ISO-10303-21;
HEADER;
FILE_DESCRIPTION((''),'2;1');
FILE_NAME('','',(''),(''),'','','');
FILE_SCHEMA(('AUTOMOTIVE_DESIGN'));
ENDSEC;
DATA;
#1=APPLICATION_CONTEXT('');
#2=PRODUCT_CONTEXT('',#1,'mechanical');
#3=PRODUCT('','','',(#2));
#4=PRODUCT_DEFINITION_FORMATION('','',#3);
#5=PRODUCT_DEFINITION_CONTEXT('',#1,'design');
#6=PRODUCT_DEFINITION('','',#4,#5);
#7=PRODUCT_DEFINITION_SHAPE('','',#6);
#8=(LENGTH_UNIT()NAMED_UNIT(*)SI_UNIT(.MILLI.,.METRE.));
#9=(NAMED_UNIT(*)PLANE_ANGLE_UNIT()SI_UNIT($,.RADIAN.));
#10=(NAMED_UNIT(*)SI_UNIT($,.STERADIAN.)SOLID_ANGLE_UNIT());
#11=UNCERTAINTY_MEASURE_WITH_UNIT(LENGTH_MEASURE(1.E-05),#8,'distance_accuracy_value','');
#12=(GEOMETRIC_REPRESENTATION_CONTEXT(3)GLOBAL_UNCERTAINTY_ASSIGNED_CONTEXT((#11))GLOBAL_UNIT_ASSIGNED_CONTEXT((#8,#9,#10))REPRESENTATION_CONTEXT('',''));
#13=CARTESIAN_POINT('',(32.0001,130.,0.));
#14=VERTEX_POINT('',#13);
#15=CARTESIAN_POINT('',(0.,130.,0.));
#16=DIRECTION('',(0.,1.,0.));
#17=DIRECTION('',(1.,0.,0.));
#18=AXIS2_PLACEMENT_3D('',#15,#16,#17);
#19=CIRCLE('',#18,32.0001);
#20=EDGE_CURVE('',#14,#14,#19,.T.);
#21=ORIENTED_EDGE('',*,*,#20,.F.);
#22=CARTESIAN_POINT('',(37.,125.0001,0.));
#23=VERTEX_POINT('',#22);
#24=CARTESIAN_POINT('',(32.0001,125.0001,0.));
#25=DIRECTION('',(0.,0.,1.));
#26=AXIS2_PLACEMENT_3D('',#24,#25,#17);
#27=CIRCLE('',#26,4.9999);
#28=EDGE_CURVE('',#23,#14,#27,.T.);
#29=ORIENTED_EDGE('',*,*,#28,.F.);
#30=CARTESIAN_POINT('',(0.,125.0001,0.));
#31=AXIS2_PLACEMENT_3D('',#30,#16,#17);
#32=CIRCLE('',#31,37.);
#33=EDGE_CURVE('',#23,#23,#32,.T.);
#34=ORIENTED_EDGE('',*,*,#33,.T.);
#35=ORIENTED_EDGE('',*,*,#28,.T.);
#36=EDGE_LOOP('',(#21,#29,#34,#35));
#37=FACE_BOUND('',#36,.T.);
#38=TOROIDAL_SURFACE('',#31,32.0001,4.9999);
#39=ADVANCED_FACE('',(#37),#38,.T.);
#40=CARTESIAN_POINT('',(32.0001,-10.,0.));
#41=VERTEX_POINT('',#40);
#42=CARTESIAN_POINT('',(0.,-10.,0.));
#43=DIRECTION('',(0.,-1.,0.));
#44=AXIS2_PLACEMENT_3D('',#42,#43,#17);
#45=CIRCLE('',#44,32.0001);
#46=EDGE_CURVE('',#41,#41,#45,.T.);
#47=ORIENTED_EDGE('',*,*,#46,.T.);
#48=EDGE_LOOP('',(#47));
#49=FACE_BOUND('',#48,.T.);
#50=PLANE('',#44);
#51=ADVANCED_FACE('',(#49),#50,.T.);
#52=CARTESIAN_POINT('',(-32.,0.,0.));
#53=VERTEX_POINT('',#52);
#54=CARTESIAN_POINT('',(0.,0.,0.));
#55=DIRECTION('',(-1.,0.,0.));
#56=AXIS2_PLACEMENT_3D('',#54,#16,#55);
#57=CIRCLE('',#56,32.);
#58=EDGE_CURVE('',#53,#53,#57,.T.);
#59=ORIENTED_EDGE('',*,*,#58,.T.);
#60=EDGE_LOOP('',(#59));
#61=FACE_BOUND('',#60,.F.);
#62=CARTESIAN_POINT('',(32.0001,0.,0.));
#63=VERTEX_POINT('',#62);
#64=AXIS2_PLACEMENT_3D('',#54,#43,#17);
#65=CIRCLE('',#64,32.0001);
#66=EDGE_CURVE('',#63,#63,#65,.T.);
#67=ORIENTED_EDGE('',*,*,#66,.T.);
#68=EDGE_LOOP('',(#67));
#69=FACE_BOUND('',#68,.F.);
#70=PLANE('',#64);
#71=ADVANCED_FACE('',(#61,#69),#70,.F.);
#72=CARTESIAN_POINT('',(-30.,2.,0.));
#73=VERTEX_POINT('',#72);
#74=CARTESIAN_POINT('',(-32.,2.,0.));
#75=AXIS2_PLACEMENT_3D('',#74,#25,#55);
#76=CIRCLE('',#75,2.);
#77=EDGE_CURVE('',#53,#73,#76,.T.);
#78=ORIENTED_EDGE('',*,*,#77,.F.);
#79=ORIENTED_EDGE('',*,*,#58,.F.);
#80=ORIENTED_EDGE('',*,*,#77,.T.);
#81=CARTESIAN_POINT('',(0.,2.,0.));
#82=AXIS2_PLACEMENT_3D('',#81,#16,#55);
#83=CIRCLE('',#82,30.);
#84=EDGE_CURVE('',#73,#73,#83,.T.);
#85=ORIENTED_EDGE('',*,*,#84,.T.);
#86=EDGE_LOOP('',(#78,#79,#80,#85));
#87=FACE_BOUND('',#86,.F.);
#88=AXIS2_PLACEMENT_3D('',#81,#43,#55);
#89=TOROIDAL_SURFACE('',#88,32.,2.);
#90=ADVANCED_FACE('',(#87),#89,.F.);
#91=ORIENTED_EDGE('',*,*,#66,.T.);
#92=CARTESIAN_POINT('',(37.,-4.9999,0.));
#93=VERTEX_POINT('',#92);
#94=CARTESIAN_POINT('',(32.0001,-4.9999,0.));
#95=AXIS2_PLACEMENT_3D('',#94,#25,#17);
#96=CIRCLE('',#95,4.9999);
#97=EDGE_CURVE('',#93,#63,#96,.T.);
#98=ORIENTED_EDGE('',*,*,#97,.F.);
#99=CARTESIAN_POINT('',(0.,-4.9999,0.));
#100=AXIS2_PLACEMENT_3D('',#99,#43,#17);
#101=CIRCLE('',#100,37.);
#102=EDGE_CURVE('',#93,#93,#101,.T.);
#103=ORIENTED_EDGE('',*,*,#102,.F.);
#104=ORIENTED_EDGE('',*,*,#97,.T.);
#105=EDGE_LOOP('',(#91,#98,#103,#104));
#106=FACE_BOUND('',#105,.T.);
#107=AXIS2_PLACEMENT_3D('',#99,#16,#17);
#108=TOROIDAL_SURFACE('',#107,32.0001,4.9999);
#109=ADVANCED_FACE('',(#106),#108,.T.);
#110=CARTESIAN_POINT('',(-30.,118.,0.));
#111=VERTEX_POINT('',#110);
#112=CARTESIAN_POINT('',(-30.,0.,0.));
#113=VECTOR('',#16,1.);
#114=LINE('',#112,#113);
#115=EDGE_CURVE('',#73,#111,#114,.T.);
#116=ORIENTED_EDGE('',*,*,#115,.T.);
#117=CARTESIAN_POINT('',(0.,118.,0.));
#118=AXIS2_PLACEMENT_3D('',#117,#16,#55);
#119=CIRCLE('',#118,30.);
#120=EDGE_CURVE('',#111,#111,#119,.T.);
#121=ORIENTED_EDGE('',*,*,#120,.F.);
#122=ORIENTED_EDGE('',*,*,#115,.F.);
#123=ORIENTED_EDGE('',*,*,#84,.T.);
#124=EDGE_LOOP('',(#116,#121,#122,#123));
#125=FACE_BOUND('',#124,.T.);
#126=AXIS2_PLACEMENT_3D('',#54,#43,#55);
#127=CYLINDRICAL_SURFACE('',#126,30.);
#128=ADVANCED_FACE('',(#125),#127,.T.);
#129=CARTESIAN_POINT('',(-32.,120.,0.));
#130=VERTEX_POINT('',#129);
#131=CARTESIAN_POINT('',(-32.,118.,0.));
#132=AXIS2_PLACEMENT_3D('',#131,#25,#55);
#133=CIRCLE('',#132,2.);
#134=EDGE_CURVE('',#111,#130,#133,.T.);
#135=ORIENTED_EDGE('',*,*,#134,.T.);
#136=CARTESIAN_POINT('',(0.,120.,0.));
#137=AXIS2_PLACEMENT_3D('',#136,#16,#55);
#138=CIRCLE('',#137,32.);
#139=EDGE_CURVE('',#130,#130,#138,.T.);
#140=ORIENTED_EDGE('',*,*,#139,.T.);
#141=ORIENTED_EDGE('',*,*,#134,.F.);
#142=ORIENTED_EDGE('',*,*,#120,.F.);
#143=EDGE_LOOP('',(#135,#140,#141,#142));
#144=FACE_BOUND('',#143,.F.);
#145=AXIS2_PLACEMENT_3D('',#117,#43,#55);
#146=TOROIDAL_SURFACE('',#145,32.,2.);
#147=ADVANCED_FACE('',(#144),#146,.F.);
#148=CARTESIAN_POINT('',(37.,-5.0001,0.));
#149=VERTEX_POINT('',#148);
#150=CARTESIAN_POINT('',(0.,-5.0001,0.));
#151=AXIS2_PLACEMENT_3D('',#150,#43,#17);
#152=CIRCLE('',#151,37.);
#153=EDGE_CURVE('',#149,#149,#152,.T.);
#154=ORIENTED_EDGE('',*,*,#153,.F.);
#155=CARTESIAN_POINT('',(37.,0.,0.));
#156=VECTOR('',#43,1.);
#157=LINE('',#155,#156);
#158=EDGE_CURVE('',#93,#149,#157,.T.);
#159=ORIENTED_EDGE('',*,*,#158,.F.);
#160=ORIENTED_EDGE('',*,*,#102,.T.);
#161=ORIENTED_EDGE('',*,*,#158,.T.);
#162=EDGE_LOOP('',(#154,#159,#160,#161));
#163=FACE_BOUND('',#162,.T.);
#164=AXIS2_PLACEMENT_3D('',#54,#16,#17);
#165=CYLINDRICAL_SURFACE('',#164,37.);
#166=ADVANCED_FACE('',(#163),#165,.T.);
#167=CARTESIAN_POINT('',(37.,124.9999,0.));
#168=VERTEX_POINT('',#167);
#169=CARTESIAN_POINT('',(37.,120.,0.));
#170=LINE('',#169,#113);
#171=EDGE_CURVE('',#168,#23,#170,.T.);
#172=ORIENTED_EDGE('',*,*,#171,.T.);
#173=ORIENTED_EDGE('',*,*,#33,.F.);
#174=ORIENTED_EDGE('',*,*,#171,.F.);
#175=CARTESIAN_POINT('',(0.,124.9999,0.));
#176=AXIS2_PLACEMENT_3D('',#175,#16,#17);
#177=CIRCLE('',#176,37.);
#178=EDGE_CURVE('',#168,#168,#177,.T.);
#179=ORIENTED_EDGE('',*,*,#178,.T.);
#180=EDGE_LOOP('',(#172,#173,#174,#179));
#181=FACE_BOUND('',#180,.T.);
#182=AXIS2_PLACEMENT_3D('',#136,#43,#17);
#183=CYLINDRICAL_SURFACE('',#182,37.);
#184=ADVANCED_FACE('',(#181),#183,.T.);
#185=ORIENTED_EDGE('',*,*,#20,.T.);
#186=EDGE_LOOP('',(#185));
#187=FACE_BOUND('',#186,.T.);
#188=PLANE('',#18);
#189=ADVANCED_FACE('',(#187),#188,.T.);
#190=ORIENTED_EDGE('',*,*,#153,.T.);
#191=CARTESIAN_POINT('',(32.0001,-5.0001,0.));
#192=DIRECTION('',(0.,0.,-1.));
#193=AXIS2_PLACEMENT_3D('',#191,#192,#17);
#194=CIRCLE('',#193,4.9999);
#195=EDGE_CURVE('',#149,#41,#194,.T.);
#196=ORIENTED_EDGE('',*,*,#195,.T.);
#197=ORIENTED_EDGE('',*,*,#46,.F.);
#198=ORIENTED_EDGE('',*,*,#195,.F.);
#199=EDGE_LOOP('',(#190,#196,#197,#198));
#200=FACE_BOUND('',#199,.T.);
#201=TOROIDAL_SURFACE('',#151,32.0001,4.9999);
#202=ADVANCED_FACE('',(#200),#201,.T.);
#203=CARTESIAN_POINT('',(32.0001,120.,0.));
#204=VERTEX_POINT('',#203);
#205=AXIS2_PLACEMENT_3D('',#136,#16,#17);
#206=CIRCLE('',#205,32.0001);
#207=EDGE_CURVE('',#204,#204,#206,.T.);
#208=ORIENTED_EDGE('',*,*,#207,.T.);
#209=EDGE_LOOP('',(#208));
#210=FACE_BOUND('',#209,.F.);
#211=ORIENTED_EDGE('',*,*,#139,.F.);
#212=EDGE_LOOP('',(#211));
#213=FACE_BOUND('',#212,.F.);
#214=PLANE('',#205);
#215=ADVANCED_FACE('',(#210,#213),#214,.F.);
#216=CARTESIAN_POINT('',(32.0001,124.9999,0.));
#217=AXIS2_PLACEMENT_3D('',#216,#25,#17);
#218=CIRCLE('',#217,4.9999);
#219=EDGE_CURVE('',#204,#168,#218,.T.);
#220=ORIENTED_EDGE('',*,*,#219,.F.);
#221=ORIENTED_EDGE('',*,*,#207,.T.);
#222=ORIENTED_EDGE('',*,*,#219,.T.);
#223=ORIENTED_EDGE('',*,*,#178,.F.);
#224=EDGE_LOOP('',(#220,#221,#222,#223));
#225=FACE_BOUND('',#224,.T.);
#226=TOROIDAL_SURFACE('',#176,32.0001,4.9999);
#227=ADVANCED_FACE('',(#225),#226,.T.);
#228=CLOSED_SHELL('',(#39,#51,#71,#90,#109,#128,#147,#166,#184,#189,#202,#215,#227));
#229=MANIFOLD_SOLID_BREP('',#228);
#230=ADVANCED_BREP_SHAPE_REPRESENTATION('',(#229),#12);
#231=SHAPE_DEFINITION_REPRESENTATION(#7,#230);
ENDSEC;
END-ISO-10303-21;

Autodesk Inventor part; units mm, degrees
ref_plane "YZ Plane" through (0, 0, 0) normal (1, 0, 0) x (0, 1, 0)
ref_plane "XZ Plane" through (0, 0, 0) normal (0, 1, 0) x (-1, 0, 0)
ref_plane "XY Plane" through (0, 0, 0) normal (0, 0, 1) x (1, 0, 0)
sketch "草图1" plane through (0, 0, 0) normal (0, 1, 0) x (-1, 0, 0)
  circle A0 centre (0, 0) radius 30
  dimension "d0" = 60
extrude "拉伸1" add sketch "草图1" along normal blind 120
sketch "草图2" plane through (0, 120, 0) normal (0, 1, 0) x (1, 0, 0)
  circle A0 centre (0, 0) radius 37
extrude "拉伸2" add sketch "草图2" along normal blind 10
sketch "草图3" plane through (0, 0, 0) normal (0, -1, 0) x (1, 0, 0)
  circle A0 centre (0, 0) radius 37
extrude "拉伸3" add sketch "草图3" along normal blind 10
fillet "圆角1" radius 5 4 edges at (-37, 130, 0) (-37, 120, 0) (-37, 0, 0) (-37, -10, 0)
fillet "圆角2" radius 2 2 edges at (30, 120, 0) (30, 0, 0)
properties part number "销钉" material "钢，高强度，低合金"
